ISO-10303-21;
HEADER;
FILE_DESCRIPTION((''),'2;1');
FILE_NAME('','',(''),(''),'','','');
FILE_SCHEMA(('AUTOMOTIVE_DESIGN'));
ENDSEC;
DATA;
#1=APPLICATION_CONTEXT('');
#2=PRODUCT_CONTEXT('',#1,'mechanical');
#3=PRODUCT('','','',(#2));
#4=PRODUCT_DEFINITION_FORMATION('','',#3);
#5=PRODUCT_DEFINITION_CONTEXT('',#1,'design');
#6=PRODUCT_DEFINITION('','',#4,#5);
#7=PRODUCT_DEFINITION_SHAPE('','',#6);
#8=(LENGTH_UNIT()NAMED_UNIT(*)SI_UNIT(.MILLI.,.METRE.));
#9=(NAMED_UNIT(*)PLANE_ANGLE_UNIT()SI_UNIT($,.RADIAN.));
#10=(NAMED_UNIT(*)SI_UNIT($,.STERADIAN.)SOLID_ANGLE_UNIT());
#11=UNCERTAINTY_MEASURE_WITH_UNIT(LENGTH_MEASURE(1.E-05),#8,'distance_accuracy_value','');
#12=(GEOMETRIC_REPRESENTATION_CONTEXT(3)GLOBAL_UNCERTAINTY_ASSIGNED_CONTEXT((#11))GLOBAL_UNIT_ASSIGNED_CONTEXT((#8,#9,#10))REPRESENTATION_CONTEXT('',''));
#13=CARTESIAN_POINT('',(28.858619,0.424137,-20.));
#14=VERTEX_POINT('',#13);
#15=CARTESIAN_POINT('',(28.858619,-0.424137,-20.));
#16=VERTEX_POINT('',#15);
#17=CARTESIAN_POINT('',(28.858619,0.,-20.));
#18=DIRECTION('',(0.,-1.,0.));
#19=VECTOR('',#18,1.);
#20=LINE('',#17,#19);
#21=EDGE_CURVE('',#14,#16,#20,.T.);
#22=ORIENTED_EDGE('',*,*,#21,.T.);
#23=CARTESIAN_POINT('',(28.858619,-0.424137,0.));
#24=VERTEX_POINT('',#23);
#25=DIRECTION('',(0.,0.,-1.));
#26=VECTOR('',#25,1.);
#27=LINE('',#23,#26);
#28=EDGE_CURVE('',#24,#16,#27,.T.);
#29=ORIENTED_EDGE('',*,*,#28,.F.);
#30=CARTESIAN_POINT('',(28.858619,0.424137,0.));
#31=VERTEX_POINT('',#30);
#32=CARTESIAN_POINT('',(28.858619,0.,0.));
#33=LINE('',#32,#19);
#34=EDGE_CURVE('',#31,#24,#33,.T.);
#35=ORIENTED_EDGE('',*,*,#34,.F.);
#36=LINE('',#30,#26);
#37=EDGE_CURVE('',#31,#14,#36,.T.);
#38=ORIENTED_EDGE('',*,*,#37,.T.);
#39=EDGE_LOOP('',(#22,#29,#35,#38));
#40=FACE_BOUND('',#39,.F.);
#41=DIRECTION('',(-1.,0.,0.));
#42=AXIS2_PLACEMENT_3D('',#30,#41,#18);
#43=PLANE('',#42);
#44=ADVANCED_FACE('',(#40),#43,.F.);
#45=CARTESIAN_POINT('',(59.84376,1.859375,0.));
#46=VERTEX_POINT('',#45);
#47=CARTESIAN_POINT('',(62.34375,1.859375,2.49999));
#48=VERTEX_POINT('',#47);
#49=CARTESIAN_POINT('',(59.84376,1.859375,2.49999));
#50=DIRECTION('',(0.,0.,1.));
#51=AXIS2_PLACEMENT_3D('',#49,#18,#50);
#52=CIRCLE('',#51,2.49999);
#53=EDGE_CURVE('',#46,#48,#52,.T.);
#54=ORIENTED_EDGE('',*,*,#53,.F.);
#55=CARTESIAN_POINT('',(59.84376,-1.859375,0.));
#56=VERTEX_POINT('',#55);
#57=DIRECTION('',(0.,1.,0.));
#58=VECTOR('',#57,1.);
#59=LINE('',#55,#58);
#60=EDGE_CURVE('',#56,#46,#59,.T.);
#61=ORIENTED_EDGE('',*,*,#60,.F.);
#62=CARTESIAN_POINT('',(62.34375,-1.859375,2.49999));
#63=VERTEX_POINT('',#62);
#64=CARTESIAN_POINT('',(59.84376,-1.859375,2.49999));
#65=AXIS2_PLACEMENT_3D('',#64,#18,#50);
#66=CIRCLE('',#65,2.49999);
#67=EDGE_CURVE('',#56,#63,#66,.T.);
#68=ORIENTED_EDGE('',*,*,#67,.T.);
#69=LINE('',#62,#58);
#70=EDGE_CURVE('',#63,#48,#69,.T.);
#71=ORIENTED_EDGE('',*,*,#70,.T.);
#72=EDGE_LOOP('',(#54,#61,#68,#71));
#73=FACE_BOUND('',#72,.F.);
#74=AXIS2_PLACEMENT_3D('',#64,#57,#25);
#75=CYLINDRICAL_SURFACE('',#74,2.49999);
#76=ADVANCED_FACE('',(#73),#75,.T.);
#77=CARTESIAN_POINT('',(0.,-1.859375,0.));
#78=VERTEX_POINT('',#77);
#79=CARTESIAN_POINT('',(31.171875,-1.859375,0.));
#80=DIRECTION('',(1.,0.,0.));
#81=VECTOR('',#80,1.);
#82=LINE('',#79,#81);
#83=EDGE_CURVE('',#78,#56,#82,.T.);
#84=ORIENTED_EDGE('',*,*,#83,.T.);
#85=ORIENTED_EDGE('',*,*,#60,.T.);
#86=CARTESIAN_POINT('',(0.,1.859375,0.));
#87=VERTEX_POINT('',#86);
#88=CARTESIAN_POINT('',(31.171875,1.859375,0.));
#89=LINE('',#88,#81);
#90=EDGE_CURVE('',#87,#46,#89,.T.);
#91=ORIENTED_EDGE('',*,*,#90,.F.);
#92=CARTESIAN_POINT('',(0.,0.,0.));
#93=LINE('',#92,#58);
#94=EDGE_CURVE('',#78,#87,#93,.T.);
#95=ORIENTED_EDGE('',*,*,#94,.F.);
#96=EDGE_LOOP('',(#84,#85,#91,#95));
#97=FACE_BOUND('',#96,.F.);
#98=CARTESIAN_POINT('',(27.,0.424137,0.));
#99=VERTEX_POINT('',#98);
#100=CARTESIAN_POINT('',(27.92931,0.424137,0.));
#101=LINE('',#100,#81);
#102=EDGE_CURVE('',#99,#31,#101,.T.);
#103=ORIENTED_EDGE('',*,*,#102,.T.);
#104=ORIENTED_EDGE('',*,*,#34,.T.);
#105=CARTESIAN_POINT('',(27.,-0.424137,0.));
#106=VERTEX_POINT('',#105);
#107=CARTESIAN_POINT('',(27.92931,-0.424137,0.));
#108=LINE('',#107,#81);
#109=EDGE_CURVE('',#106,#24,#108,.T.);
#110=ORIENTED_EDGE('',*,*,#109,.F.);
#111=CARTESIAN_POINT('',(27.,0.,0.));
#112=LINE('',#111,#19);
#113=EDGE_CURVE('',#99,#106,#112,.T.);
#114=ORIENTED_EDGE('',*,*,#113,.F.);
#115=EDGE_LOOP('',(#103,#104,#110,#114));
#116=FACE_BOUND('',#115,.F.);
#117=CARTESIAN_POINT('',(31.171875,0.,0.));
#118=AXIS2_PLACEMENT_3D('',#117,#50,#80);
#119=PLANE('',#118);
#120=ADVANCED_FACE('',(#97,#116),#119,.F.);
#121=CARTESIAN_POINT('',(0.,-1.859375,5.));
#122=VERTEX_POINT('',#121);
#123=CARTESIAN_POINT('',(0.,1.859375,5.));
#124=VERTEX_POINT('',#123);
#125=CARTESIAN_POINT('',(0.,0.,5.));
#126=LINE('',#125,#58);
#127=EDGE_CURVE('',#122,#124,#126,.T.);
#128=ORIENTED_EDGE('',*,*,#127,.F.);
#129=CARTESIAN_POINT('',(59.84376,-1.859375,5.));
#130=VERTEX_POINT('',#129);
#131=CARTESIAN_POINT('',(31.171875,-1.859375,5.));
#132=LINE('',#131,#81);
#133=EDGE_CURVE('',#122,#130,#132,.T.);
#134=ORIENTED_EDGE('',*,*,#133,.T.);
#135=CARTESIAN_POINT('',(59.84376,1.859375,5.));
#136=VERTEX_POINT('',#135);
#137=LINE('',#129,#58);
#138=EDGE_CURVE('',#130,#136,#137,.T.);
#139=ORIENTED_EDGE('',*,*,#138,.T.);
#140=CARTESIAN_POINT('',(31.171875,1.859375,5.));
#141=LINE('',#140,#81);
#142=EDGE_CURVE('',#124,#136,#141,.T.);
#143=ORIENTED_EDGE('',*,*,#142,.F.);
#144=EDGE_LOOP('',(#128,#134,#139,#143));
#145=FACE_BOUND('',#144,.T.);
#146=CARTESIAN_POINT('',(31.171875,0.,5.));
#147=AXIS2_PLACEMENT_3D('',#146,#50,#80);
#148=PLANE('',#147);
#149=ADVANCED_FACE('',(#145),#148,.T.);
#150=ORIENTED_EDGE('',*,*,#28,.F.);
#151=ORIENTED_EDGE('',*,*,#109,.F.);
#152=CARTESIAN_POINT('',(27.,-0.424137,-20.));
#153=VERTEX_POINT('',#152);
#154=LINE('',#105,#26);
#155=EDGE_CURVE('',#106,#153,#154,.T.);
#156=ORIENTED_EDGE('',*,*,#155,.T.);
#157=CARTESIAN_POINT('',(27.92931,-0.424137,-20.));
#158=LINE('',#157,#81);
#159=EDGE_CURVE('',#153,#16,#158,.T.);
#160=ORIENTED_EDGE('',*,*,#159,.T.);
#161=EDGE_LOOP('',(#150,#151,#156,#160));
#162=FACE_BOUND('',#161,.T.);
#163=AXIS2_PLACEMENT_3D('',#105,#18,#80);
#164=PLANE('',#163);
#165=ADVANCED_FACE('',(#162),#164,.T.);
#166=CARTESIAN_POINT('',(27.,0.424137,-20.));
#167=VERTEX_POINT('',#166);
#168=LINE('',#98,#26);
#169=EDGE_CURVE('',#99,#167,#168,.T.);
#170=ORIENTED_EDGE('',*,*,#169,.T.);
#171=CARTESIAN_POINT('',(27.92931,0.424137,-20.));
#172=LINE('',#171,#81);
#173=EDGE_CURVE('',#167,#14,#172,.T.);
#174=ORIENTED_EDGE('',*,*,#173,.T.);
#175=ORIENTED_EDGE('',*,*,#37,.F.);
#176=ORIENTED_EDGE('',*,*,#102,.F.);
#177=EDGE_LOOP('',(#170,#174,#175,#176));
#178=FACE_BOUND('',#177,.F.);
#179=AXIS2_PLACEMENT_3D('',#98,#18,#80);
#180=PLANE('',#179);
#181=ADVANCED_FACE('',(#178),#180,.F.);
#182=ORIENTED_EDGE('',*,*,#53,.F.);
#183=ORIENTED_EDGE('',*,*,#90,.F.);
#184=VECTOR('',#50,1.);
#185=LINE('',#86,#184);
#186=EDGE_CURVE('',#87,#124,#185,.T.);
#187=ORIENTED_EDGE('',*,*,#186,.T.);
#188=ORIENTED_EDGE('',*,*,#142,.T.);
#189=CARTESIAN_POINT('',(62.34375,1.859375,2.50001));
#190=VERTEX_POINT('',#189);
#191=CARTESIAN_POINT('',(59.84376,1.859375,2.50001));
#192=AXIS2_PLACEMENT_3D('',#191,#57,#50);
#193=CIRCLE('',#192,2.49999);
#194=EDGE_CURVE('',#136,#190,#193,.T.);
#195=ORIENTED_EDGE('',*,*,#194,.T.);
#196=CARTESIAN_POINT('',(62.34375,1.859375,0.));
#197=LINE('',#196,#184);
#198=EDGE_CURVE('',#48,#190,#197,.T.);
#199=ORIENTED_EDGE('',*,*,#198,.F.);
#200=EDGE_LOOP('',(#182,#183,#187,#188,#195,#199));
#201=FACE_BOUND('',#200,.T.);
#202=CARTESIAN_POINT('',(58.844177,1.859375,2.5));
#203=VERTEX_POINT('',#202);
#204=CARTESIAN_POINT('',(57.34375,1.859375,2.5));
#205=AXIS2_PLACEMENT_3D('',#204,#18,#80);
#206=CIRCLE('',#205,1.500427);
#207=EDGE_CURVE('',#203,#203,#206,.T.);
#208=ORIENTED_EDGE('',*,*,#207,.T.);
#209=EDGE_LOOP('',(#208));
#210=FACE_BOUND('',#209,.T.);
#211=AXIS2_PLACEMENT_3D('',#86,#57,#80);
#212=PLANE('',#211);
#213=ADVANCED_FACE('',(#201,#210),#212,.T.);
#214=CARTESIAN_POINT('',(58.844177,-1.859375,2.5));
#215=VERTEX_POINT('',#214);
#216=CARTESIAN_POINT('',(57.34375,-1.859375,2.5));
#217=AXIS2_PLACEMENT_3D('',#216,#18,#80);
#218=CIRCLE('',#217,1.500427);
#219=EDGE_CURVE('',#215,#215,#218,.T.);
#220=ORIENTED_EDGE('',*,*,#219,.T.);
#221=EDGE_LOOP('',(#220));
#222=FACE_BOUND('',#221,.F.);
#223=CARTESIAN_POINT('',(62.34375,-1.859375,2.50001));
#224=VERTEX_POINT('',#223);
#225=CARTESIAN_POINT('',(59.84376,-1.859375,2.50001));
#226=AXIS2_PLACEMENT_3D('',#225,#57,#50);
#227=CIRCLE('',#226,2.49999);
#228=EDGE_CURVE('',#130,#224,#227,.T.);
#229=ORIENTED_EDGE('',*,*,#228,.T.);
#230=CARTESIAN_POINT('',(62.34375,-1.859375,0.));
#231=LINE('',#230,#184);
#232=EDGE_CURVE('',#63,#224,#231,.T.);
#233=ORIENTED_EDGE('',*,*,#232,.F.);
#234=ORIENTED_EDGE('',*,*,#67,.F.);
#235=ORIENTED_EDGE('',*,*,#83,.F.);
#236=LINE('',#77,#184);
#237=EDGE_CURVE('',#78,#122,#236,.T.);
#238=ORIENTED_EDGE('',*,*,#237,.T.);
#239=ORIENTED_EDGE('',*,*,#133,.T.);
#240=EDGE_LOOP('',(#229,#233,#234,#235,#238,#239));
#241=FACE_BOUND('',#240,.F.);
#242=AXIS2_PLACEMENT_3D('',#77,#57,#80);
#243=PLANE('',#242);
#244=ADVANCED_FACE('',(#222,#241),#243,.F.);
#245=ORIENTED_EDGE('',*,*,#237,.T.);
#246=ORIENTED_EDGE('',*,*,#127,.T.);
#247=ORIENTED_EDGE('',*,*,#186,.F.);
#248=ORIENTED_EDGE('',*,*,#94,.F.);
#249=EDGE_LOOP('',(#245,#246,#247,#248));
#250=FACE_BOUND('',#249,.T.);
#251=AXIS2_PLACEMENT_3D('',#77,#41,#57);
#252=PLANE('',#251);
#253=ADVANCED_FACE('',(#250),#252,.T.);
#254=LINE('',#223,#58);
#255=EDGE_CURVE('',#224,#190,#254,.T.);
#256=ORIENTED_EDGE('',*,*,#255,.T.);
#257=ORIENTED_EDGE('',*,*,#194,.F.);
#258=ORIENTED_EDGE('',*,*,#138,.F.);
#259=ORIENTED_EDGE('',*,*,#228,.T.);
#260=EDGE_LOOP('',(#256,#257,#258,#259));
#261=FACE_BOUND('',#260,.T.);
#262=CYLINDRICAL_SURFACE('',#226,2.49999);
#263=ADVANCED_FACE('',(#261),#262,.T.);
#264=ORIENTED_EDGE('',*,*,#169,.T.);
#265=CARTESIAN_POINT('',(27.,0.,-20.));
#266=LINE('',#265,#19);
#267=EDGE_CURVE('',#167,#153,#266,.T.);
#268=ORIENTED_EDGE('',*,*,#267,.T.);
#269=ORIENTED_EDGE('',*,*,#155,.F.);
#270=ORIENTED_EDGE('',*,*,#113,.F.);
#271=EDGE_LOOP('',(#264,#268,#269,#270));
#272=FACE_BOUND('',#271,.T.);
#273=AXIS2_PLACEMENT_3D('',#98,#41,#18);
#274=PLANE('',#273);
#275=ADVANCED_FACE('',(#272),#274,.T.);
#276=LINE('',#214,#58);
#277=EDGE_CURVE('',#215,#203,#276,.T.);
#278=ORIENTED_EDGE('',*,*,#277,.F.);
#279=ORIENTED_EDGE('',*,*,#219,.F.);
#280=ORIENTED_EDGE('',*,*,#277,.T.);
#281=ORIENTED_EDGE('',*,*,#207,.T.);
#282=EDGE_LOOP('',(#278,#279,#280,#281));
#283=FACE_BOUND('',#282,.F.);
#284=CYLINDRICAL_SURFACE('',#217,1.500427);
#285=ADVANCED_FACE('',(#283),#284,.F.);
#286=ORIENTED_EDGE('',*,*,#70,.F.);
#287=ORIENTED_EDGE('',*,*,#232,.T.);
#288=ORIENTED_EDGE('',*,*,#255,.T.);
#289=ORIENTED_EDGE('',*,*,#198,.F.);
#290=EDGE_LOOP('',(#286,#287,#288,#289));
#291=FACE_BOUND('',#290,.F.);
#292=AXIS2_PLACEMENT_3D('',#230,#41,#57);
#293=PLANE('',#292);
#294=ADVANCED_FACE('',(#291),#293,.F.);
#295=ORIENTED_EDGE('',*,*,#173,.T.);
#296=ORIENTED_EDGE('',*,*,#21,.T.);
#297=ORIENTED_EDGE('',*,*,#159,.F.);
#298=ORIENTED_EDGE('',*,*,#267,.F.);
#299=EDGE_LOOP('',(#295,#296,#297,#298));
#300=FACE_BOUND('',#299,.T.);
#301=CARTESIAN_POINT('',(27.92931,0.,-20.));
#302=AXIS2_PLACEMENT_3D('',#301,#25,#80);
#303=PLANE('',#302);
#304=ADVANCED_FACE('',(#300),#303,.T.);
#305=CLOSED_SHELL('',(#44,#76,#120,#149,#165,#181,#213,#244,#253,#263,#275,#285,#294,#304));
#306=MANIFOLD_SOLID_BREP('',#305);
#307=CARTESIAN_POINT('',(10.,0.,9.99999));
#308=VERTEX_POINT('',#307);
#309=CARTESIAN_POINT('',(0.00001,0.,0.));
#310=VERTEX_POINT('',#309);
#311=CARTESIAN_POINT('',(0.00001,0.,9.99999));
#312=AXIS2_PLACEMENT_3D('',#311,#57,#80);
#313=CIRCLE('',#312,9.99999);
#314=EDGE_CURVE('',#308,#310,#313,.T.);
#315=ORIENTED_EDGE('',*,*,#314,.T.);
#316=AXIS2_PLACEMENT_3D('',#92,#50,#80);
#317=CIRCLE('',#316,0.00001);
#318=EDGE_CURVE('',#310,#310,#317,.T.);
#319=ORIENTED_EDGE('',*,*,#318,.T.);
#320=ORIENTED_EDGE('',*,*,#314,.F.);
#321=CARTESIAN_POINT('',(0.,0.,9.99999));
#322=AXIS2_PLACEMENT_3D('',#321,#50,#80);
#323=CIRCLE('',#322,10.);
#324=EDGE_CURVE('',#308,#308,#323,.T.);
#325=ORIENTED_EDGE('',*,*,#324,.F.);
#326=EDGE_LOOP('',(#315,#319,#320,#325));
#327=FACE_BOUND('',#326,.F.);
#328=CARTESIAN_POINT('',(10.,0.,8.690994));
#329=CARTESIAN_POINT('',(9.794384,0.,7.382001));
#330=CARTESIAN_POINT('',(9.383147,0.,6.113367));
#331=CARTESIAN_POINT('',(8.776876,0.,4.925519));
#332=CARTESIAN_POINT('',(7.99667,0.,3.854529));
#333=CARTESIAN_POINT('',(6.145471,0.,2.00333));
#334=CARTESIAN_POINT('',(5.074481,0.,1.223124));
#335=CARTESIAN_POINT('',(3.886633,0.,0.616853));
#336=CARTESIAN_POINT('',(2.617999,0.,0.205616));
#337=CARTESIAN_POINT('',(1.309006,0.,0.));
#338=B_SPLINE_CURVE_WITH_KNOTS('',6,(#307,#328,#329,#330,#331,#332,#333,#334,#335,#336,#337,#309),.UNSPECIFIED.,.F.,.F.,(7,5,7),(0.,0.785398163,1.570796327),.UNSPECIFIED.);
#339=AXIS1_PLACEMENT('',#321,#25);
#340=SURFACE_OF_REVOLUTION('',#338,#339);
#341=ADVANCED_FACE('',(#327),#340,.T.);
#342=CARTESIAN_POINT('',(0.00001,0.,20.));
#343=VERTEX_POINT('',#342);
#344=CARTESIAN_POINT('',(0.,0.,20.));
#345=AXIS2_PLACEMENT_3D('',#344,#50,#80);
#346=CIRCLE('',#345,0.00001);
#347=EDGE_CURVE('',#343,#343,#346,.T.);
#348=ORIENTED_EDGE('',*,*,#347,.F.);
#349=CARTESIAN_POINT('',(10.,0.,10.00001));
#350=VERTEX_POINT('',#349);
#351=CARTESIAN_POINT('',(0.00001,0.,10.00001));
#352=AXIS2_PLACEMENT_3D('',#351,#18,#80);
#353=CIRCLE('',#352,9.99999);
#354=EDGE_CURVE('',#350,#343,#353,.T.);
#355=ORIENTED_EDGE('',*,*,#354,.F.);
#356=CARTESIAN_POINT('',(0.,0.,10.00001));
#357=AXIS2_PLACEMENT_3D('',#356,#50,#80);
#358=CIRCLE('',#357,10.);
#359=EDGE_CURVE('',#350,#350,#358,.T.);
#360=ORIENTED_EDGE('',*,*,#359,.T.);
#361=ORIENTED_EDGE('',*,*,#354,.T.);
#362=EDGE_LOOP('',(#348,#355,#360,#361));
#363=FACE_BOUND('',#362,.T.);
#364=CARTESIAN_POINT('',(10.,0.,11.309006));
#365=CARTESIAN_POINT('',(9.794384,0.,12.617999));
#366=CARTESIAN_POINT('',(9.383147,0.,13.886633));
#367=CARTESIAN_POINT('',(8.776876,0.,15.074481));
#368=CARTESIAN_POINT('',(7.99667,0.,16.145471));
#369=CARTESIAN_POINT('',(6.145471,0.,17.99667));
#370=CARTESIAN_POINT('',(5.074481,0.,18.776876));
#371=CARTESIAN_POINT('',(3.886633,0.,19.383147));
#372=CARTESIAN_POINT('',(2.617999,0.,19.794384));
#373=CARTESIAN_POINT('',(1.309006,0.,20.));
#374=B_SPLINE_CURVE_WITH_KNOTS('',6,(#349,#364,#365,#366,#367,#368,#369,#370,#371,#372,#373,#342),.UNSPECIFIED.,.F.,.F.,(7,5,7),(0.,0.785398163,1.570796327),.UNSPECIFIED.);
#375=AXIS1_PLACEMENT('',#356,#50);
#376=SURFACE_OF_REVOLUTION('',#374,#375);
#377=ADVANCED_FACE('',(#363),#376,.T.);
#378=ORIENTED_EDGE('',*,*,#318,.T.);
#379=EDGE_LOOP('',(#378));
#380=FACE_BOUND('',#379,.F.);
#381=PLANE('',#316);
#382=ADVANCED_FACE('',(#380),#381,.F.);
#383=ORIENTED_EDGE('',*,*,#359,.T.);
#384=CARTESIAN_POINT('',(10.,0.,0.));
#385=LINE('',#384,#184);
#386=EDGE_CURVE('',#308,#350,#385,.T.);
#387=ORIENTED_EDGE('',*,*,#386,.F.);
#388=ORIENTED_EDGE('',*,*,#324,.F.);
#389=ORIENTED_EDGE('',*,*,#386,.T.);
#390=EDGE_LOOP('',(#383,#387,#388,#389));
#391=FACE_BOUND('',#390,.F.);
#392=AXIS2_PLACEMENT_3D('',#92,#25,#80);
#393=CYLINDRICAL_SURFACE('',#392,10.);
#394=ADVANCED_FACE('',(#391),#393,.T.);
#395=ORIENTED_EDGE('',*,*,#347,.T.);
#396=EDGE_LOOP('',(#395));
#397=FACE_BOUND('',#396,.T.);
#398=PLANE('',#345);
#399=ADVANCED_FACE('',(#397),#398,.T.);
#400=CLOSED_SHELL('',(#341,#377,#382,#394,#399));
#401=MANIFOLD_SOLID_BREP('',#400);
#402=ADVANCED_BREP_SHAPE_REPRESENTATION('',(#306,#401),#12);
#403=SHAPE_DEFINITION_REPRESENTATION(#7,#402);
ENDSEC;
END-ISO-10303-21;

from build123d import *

# Parameters (mm, degrees)
F0_R     = 10
F1_DEPTH = 20
F2_R     = 9.99999
F3_W     = 62.343750149
F3_H     = 3.7187503185
F4_DEPTH = 5
F5_R     = 1.5004268613
F6_DEPTH = 25
F7_R     = 2.49999
F8_W     = 1.8586194401
F8_H     = 0.8482741494
F9_DEPTH = 20


# Not quite as in the source:
# - a fillet or chamfer is up to 0.001 mm smaller than in the source, because OpenCascade refuses the exact size


with BuildPart() as f1:
    # F0 (on Top) → F1 (new body)
    with BuildSketch(Plane.XY):
        Circle(F0_R)
    extrude(amount=F1_DEPTH)

    # F2 (radius 10 in the source; OpenCascade refuses exactly that, so slightly less here)
    f2_edges = [f1.edges().sort_by_distance(p)[0] for p in [
        (-10, 0, 20),
        (-10, 0, 0),
    ]]
    fillet(f2_edges, radius=F2_R)


with BuildPart() as f4:
    # F3 (on Top) → F4 (new body)
    with BuildSketch(Plane.XY):
        with Locations((31.1718750745, 0)):
            Rectangle(F3_W, F3_H)
    extrude(amount=F4_DEPTH)

    # F5 (on face) → F6 (cut)
    with BuildSketch(Plane.XZ.offset(1.8593751593)):
        with Locations((57.343750149, 2.5)):
            Circle(F5_R)
    extrude(amount=-F6_DEPTH, mode=Mode.SUBTRACT)

    # F7 (radius 2.5 in the source; OpenCascade refuses exactly that, so slightly less here)
    f7_edges = [f4.edges().sort_by_distance(p)[0] for p in [
        (62.34375, 0, 0),
        (62.34375, 0, 5),
    ]]
    fillet(f7_edges, radius=F7_R)

    # F8 (on face) → F9 (join)
    with BuildSketch(Plane(origin=(0, 0, 0), x_dir=(1, 0, 0), z_dir=(0, 0, -1))):
        with Locations((27.92930972, 0)):
            Rectangle(F8_W, F8_H)
    extrude(amount=F9_DEPTH)


solid = Compound([f1.part, f4.part])
